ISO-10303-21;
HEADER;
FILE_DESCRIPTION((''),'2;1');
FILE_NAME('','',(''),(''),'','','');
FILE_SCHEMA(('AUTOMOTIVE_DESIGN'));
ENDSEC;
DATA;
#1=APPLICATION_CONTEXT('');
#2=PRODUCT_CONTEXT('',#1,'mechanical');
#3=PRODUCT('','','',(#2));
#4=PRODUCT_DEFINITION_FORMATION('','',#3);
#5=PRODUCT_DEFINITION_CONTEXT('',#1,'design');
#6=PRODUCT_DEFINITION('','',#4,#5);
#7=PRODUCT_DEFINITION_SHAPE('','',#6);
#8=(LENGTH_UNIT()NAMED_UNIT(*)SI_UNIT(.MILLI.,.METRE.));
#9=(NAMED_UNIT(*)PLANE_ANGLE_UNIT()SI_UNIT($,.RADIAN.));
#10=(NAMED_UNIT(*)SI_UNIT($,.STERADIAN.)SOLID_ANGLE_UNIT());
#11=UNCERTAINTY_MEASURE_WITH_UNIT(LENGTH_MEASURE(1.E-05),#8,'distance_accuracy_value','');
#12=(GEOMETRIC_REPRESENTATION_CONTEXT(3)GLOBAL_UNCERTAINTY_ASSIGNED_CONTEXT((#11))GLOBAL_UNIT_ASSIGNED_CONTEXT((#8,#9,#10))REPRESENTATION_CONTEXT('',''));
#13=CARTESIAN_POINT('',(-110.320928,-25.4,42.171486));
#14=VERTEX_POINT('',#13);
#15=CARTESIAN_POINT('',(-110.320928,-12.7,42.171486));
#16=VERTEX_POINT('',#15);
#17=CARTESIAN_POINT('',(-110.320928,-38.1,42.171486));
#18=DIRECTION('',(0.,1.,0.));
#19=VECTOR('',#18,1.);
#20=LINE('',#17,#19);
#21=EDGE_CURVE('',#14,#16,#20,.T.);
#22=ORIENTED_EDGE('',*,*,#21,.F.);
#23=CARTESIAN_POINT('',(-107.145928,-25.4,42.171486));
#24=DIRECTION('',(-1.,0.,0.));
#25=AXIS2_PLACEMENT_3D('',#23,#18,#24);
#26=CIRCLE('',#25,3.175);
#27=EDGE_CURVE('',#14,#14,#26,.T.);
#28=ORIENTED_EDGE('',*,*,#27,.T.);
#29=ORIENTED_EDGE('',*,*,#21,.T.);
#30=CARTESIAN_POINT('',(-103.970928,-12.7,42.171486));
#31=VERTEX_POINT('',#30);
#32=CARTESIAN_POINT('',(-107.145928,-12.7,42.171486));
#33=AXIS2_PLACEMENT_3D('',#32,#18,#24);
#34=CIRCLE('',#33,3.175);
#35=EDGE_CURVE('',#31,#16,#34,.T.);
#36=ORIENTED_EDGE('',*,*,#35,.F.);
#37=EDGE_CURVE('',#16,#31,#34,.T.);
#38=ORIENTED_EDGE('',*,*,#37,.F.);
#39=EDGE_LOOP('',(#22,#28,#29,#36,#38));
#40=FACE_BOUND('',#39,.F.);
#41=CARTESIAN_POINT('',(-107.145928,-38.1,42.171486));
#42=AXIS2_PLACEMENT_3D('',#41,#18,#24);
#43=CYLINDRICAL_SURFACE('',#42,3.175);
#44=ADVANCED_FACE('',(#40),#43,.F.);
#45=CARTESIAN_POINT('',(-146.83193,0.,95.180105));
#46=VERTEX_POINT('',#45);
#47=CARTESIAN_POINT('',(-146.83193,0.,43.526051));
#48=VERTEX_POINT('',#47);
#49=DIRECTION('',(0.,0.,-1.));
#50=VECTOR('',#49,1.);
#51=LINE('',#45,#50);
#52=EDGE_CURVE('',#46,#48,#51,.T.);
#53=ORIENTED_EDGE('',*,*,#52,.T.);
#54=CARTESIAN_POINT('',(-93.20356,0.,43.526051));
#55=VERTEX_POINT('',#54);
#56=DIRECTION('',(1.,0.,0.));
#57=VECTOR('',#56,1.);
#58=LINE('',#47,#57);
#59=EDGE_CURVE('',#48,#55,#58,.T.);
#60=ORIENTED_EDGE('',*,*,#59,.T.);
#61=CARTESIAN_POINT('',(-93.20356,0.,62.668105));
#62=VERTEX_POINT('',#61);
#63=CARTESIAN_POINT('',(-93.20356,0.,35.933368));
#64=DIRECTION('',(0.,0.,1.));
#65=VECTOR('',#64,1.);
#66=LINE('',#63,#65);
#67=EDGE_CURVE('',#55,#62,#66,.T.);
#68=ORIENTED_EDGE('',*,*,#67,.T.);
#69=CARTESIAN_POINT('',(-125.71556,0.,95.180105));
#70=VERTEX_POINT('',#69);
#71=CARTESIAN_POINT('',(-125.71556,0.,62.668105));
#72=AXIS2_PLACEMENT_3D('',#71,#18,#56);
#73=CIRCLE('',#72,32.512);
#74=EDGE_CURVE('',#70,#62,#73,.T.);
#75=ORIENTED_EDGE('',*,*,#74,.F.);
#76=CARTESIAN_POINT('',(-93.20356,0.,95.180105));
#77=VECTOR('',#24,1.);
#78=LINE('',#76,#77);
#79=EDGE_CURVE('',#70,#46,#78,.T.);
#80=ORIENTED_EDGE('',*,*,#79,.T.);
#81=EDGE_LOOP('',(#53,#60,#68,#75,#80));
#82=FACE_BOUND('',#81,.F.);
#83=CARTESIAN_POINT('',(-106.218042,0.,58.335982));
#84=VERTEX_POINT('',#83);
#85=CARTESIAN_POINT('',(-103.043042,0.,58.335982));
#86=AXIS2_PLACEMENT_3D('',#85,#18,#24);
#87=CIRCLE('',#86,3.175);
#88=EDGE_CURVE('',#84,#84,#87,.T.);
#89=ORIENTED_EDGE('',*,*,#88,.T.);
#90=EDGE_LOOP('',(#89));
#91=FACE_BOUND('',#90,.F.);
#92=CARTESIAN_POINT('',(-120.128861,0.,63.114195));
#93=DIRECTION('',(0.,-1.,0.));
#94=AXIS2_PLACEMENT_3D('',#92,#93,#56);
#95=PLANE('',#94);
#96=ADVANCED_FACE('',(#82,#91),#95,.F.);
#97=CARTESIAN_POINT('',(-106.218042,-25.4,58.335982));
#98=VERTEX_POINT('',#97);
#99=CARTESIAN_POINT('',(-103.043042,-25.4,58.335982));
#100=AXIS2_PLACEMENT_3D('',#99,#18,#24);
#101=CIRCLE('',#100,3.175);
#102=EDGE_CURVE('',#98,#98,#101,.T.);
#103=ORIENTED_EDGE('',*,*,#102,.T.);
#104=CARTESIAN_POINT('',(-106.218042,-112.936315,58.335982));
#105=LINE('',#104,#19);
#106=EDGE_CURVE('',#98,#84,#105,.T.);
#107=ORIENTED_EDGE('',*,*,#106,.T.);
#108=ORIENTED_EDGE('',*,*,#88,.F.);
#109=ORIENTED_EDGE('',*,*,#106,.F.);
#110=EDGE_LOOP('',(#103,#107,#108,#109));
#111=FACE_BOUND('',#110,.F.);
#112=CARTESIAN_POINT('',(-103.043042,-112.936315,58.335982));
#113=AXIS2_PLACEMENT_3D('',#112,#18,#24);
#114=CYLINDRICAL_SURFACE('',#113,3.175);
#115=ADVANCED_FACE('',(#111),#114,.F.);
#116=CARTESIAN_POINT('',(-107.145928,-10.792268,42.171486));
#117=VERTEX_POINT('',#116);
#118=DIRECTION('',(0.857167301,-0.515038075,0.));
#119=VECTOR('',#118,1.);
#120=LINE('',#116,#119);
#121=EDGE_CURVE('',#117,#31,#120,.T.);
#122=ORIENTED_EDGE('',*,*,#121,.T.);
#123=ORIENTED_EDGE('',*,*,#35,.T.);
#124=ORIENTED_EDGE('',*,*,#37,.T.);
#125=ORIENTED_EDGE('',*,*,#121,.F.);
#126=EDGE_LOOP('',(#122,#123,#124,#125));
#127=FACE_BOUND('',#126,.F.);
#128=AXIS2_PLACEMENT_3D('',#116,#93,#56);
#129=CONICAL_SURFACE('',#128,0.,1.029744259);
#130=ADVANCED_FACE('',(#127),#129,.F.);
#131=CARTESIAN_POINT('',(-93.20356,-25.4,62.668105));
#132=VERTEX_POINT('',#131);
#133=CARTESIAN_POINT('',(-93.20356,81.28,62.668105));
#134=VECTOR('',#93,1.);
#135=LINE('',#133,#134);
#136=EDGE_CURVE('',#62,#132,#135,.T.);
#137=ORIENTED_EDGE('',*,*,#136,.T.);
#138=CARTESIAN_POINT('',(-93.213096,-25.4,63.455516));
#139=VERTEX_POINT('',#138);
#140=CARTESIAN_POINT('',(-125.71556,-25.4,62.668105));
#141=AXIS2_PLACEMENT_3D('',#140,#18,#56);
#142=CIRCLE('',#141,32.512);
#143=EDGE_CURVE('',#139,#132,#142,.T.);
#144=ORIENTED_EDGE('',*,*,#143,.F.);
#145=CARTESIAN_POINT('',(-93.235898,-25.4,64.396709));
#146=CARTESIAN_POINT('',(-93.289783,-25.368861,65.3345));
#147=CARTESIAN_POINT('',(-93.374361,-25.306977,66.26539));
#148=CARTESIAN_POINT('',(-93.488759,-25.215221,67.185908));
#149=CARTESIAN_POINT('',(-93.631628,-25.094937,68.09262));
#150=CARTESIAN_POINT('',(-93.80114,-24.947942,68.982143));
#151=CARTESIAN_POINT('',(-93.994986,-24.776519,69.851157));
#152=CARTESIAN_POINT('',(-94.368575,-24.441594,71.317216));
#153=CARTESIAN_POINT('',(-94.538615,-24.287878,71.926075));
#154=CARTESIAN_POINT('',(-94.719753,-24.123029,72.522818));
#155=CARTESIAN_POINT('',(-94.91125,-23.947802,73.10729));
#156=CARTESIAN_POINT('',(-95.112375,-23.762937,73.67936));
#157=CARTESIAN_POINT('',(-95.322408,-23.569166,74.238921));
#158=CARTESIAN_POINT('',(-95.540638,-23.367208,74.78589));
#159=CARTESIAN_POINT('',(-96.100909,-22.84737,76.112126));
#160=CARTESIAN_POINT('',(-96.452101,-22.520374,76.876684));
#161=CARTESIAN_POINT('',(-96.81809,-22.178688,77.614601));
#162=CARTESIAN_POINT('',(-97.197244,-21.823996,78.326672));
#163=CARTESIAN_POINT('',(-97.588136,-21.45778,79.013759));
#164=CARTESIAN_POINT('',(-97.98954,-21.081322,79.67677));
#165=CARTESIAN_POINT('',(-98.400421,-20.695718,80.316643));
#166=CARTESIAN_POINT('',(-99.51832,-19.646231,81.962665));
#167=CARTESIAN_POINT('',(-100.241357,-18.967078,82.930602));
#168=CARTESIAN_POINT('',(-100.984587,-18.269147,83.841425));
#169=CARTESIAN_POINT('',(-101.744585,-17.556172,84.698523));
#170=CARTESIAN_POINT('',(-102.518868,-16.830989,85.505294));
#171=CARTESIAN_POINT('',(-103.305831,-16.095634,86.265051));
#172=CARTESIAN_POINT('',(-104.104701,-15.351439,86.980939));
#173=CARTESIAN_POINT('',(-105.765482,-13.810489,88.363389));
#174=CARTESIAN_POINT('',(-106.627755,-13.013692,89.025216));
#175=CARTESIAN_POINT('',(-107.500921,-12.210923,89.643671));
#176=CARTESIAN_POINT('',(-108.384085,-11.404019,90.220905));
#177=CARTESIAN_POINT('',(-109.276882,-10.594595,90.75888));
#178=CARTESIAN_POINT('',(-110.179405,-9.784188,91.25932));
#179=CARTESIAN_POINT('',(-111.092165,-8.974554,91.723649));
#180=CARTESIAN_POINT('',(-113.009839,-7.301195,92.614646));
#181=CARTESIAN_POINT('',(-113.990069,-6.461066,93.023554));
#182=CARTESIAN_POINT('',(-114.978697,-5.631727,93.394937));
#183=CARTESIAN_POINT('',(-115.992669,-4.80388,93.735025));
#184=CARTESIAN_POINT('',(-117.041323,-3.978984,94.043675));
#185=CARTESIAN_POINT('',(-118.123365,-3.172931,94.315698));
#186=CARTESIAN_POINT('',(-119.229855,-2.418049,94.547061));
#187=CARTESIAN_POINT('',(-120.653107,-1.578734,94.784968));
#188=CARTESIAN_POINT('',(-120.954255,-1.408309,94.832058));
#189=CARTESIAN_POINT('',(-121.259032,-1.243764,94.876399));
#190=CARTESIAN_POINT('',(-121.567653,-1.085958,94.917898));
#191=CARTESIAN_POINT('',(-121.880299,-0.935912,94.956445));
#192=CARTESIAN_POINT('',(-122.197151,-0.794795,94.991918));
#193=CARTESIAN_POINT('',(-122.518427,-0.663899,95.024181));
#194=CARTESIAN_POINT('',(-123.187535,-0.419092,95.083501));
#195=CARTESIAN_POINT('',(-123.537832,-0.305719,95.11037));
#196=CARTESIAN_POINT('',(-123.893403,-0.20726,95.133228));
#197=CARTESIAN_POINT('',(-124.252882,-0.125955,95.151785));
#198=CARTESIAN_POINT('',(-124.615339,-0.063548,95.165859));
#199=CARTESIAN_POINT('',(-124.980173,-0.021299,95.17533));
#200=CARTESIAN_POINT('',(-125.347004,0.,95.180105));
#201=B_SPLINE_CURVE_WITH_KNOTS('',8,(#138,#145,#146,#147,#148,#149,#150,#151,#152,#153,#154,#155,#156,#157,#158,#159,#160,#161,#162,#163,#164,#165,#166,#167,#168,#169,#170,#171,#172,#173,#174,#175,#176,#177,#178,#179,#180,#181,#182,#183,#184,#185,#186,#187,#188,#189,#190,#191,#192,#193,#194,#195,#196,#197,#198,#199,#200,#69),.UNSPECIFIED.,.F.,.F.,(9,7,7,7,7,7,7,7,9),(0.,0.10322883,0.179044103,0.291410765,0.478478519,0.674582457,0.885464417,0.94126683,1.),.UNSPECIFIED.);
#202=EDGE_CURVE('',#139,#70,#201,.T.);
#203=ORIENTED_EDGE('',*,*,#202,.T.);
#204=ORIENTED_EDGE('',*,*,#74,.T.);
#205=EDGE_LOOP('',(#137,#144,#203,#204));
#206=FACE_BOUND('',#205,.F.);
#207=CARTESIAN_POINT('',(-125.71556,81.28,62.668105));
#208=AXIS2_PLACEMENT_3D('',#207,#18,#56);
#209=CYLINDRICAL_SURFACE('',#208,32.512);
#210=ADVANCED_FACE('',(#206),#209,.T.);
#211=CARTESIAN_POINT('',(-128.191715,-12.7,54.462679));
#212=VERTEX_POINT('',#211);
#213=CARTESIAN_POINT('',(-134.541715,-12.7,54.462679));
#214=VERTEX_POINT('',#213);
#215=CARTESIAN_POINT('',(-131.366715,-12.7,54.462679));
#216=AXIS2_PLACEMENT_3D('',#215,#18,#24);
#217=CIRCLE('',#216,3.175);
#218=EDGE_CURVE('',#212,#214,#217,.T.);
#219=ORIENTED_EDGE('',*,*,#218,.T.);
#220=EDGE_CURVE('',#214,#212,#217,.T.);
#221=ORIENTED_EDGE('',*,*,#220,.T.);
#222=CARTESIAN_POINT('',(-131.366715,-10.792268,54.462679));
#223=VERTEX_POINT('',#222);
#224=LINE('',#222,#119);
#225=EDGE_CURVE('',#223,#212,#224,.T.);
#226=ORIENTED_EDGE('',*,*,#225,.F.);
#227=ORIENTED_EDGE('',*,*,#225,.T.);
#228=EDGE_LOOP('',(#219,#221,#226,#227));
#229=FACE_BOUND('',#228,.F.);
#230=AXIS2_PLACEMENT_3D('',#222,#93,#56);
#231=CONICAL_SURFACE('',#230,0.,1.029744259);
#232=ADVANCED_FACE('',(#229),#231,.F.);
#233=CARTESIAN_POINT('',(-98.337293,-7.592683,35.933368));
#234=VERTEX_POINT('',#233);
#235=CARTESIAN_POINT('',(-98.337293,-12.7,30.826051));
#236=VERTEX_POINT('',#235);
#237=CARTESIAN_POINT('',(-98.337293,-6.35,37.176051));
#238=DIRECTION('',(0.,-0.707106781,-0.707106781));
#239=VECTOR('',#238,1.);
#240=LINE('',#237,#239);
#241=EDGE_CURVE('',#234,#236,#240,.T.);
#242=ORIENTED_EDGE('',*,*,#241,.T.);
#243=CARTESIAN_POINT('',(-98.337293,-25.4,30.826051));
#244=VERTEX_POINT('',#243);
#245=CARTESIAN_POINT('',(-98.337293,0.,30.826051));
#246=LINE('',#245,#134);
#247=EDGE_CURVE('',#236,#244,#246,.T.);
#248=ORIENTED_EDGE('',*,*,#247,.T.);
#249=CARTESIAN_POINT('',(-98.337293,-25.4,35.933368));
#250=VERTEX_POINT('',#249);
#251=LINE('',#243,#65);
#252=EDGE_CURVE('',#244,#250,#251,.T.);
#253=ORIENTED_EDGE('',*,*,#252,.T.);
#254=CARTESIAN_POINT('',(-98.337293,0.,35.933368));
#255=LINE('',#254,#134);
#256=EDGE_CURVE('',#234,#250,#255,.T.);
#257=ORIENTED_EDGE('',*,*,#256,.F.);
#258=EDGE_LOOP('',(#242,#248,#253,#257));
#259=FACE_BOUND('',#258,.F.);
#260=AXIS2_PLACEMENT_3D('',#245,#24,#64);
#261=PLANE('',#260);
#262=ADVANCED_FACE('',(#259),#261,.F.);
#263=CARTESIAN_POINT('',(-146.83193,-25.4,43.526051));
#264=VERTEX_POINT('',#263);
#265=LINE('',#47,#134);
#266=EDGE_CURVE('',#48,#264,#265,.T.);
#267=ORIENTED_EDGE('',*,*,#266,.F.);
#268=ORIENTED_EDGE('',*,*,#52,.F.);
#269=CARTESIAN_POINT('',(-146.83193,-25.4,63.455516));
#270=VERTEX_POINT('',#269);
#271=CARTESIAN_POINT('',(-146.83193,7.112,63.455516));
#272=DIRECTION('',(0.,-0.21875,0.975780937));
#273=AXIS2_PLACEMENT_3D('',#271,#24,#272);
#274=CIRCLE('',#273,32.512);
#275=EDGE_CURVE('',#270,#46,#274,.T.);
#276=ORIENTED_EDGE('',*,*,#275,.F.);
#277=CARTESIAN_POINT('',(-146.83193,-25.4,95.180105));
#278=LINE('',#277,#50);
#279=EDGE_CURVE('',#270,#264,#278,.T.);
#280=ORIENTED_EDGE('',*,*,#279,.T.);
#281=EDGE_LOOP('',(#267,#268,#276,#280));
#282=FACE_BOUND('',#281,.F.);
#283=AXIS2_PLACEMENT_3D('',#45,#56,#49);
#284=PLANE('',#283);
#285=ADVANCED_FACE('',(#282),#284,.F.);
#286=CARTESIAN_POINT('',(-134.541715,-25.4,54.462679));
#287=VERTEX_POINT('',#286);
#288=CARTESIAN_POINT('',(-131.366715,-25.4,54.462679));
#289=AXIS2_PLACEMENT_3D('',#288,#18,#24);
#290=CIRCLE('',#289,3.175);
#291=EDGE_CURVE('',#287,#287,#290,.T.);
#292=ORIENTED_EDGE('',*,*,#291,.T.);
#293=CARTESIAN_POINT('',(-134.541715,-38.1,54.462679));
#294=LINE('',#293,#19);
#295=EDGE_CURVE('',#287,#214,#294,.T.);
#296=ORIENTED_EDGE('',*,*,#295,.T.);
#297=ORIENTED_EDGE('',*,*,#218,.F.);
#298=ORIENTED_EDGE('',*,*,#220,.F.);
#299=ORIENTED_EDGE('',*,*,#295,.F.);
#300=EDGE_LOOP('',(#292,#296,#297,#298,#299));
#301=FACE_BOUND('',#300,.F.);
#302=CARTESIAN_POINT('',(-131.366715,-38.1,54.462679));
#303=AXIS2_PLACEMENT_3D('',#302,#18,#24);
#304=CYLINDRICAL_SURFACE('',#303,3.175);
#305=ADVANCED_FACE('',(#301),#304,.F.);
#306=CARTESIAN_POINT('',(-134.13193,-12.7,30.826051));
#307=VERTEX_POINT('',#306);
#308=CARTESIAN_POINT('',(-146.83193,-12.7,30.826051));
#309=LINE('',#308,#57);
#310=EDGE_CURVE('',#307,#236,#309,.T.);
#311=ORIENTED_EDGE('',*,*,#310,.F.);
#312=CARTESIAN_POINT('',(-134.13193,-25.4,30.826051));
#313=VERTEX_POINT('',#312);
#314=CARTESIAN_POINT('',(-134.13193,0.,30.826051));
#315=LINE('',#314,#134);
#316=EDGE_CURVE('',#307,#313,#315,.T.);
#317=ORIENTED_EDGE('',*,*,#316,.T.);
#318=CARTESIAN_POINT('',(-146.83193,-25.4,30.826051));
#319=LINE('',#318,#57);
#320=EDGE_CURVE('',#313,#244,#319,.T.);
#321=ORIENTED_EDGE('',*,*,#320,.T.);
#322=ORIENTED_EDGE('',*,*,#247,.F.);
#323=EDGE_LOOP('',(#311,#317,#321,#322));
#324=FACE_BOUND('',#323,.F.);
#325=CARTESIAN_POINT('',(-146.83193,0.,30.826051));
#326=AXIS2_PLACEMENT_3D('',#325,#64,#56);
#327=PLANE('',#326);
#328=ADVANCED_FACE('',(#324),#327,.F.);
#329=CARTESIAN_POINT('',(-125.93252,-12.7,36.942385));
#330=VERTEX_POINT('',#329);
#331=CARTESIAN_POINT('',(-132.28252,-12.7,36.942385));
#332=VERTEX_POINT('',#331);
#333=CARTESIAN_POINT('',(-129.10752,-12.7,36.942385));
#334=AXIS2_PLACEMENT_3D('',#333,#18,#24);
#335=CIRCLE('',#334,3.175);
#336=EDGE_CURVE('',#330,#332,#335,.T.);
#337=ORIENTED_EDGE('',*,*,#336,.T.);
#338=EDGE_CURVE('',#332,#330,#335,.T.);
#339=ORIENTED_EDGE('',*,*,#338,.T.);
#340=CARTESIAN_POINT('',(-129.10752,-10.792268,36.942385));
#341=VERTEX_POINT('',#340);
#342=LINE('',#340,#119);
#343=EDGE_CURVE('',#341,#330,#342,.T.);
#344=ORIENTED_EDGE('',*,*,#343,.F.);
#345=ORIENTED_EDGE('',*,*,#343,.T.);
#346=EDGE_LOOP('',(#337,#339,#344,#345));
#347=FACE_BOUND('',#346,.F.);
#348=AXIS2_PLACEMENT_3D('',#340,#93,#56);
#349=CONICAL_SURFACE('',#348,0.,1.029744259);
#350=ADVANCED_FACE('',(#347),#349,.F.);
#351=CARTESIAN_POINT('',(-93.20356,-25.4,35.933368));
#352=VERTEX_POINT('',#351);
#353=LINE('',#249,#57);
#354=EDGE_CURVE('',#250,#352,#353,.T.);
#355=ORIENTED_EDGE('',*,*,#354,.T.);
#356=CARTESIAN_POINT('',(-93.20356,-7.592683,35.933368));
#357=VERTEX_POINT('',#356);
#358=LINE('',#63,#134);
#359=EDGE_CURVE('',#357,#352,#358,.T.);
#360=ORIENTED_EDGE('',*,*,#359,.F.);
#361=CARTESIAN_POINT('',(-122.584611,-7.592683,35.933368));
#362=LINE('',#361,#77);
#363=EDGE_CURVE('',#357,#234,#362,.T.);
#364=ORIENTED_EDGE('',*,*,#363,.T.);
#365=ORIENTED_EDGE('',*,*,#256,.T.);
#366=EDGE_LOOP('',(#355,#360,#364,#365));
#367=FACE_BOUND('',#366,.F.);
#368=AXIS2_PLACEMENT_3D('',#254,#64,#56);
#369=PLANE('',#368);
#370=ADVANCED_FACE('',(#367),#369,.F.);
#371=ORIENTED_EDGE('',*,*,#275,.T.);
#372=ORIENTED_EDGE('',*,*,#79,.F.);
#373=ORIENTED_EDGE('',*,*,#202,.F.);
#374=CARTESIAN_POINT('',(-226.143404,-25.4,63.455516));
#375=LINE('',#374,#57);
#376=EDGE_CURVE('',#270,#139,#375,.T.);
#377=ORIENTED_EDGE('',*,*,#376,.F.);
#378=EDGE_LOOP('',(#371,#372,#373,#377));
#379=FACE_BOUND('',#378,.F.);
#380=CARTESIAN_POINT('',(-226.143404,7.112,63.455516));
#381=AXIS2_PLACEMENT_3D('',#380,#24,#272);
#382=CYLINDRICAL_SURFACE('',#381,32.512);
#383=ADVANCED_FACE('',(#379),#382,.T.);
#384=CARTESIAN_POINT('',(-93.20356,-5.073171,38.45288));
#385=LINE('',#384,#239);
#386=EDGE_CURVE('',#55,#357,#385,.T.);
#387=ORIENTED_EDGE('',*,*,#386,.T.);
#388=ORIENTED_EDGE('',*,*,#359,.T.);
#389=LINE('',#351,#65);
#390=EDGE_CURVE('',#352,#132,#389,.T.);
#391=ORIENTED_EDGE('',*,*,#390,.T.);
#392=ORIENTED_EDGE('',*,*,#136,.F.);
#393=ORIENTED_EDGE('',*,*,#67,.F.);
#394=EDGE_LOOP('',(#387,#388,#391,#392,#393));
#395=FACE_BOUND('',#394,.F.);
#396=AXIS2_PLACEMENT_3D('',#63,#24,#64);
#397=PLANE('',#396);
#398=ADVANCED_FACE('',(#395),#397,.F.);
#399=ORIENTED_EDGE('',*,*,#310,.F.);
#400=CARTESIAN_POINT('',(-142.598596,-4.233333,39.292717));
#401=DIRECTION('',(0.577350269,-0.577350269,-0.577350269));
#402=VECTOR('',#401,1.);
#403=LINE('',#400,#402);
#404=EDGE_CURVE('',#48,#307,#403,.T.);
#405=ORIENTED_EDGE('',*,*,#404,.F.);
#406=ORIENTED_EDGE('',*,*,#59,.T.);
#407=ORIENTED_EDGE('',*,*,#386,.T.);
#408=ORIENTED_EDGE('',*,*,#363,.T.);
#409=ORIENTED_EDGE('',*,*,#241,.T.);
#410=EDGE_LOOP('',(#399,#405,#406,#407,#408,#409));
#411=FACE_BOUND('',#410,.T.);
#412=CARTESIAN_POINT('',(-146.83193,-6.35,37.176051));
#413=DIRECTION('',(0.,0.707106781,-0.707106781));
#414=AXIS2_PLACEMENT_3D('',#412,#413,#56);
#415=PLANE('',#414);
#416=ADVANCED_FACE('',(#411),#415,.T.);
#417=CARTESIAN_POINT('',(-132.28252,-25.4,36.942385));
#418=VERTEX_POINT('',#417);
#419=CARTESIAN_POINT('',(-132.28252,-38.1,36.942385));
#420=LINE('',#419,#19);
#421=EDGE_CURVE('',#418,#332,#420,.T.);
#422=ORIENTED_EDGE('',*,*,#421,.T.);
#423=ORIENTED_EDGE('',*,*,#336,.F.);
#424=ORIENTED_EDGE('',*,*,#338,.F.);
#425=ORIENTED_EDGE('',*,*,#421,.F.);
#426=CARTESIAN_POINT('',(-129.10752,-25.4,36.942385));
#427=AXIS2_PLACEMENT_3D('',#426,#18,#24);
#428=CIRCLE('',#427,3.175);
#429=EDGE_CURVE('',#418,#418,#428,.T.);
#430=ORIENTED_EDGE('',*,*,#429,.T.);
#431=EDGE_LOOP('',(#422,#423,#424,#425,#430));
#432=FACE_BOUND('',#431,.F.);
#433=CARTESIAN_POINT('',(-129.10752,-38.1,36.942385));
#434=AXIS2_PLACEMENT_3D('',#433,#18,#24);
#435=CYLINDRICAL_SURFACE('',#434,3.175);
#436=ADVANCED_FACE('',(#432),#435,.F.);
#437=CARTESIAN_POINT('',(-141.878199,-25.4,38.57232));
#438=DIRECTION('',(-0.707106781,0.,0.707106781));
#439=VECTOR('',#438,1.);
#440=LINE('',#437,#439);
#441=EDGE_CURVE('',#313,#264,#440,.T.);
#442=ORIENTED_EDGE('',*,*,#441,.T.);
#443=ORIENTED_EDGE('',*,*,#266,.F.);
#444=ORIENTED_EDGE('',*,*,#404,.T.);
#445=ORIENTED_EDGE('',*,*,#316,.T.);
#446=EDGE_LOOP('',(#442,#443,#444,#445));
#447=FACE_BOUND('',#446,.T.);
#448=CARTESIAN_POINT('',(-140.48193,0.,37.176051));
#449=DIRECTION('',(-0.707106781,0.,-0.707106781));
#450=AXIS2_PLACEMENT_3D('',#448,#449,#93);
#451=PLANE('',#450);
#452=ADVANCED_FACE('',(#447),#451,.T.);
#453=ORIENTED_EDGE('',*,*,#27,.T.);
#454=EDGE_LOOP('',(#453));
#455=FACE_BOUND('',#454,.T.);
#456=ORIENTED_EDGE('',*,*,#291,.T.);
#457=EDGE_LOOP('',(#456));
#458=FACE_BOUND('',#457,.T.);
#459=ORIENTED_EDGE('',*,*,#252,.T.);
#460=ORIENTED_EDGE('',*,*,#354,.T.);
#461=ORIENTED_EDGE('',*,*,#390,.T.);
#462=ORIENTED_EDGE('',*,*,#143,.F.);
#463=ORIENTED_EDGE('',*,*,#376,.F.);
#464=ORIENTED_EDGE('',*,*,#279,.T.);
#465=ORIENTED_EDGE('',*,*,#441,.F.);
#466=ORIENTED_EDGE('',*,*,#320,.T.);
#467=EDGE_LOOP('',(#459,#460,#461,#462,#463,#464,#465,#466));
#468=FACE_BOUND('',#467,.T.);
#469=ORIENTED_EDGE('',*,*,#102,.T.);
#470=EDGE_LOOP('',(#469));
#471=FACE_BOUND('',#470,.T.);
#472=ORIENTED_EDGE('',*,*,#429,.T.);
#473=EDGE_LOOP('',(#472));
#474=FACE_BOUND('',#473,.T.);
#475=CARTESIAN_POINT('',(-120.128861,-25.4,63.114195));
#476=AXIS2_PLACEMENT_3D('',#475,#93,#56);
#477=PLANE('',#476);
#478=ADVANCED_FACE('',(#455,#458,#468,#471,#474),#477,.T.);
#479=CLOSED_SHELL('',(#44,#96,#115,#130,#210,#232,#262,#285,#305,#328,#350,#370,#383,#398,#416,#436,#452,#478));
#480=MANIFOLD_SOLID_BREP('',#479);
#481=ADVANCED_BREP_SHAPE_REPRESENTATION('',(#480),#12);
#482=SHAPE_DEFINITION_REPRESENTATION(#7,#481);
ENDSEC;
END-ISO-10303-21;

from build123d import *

# Parameters (mm, degrees)
F1_DEPTH    = 25.4
F2_T1_DEPTH = 187.96
F2_T3_DEPTH = 212.2513193251
F3_SIZE     = 12.7
F5_D        = 6.35
F6_D        = 6.35
F6_DEPTH    = 12.7
F6_TIP      = 1.9077324654


# Not quite as in the source:
# - a fillet or chamfer that OpenCascade refuses, or shapes differently, is made with other operations: its cross-section is extruded or revolved along the edge and cut away or added


with BuildPart() as f1:
    # F0 (on Front) → F1 (new body)
    with BuildSketch(Plane.XZ):
        Polygon((-98.3372926712, 35.933367908), (-93.2035595179, 35.933367908), (-93.2035595179, 95.180105418), (-146.8319296837, 95.180105418), (-146.8319296837, 30.8260507882), (-98.3372926712, 30.8260507882), align=None)
    extrude(amount=F1_DEPTH)

    # F2: fillet of radius 32.512 on 2 edges, made by hand

    # F2_s2 → F2_t1 (cut)
    with BuildSketch(Plane.XZ.offset(-81.28)):
        with BuildLine():
            ThreePointArc((-93.2035595179, 62.668105418), (-102.7261038479, 85.6575610879), (-125.7155595179, 95.180105418))
            Line((-125.7155595179, 95.180105418), (-93.2035595179, 95.180105418))
            Line((-93.2035595179, 95.180105418), (-93.2035595179, 62.668105418))
        make_face()
    extrude(amount=F2_T1_DEPTH, mode=Mode.SUBTRACT)

    # F2_s4 → F2_t3 (cut)
    with BuildSketch(Plane.YZ.offset(-226.1434042633)):
        with BuildLine():
            ThreePointArc((0, 95.180105418), (-18.2676718655, 83.7755155861), (-25.4, 63.4555155861))
            Line((-25.4, 63.4555155861), (-25.4, 95.180105418))
            Line((-25.4, 95.180105418), (0, 95.180105418))
        make_face()
    extrude(amount=F2_T3_DEPTH, mode=Mode.SUBTRACT)

    # F3
    f3_edges = [f1.edges().sort_by_distance(p)[0] for p in [
        (-122.584611, 0, 30.826051),
        (-146.83193, -12.7, 30.826051),
    ]]
    chamfer(f3_edges, length=F3_SIZE)

    # F5 (through all)
    with Locations(Plane.XZ.offset(25.4)):
        with Locations((-103.0430421233, 58.3359822631)):
            Hole(F5_D / 2)

    # F6
    with Locations(Plane.XZ.offset(25.4)):
        with Locations((-131.3667148352, 54.4626787305), (-107.1459278464, 42.1714857221), (-129.1075199842, 36.9423851371)):
            Hole(F6_D / 2, depth=F6_DEPTH)
            with Locations((0, 0, -(F6_DEPTH + F6_TIP / 2))):  # 118° drill point
                Cone(0, F6_D / 2, F6_TIP, mode=Mode.SUBTRACT)


solid = f1.part
